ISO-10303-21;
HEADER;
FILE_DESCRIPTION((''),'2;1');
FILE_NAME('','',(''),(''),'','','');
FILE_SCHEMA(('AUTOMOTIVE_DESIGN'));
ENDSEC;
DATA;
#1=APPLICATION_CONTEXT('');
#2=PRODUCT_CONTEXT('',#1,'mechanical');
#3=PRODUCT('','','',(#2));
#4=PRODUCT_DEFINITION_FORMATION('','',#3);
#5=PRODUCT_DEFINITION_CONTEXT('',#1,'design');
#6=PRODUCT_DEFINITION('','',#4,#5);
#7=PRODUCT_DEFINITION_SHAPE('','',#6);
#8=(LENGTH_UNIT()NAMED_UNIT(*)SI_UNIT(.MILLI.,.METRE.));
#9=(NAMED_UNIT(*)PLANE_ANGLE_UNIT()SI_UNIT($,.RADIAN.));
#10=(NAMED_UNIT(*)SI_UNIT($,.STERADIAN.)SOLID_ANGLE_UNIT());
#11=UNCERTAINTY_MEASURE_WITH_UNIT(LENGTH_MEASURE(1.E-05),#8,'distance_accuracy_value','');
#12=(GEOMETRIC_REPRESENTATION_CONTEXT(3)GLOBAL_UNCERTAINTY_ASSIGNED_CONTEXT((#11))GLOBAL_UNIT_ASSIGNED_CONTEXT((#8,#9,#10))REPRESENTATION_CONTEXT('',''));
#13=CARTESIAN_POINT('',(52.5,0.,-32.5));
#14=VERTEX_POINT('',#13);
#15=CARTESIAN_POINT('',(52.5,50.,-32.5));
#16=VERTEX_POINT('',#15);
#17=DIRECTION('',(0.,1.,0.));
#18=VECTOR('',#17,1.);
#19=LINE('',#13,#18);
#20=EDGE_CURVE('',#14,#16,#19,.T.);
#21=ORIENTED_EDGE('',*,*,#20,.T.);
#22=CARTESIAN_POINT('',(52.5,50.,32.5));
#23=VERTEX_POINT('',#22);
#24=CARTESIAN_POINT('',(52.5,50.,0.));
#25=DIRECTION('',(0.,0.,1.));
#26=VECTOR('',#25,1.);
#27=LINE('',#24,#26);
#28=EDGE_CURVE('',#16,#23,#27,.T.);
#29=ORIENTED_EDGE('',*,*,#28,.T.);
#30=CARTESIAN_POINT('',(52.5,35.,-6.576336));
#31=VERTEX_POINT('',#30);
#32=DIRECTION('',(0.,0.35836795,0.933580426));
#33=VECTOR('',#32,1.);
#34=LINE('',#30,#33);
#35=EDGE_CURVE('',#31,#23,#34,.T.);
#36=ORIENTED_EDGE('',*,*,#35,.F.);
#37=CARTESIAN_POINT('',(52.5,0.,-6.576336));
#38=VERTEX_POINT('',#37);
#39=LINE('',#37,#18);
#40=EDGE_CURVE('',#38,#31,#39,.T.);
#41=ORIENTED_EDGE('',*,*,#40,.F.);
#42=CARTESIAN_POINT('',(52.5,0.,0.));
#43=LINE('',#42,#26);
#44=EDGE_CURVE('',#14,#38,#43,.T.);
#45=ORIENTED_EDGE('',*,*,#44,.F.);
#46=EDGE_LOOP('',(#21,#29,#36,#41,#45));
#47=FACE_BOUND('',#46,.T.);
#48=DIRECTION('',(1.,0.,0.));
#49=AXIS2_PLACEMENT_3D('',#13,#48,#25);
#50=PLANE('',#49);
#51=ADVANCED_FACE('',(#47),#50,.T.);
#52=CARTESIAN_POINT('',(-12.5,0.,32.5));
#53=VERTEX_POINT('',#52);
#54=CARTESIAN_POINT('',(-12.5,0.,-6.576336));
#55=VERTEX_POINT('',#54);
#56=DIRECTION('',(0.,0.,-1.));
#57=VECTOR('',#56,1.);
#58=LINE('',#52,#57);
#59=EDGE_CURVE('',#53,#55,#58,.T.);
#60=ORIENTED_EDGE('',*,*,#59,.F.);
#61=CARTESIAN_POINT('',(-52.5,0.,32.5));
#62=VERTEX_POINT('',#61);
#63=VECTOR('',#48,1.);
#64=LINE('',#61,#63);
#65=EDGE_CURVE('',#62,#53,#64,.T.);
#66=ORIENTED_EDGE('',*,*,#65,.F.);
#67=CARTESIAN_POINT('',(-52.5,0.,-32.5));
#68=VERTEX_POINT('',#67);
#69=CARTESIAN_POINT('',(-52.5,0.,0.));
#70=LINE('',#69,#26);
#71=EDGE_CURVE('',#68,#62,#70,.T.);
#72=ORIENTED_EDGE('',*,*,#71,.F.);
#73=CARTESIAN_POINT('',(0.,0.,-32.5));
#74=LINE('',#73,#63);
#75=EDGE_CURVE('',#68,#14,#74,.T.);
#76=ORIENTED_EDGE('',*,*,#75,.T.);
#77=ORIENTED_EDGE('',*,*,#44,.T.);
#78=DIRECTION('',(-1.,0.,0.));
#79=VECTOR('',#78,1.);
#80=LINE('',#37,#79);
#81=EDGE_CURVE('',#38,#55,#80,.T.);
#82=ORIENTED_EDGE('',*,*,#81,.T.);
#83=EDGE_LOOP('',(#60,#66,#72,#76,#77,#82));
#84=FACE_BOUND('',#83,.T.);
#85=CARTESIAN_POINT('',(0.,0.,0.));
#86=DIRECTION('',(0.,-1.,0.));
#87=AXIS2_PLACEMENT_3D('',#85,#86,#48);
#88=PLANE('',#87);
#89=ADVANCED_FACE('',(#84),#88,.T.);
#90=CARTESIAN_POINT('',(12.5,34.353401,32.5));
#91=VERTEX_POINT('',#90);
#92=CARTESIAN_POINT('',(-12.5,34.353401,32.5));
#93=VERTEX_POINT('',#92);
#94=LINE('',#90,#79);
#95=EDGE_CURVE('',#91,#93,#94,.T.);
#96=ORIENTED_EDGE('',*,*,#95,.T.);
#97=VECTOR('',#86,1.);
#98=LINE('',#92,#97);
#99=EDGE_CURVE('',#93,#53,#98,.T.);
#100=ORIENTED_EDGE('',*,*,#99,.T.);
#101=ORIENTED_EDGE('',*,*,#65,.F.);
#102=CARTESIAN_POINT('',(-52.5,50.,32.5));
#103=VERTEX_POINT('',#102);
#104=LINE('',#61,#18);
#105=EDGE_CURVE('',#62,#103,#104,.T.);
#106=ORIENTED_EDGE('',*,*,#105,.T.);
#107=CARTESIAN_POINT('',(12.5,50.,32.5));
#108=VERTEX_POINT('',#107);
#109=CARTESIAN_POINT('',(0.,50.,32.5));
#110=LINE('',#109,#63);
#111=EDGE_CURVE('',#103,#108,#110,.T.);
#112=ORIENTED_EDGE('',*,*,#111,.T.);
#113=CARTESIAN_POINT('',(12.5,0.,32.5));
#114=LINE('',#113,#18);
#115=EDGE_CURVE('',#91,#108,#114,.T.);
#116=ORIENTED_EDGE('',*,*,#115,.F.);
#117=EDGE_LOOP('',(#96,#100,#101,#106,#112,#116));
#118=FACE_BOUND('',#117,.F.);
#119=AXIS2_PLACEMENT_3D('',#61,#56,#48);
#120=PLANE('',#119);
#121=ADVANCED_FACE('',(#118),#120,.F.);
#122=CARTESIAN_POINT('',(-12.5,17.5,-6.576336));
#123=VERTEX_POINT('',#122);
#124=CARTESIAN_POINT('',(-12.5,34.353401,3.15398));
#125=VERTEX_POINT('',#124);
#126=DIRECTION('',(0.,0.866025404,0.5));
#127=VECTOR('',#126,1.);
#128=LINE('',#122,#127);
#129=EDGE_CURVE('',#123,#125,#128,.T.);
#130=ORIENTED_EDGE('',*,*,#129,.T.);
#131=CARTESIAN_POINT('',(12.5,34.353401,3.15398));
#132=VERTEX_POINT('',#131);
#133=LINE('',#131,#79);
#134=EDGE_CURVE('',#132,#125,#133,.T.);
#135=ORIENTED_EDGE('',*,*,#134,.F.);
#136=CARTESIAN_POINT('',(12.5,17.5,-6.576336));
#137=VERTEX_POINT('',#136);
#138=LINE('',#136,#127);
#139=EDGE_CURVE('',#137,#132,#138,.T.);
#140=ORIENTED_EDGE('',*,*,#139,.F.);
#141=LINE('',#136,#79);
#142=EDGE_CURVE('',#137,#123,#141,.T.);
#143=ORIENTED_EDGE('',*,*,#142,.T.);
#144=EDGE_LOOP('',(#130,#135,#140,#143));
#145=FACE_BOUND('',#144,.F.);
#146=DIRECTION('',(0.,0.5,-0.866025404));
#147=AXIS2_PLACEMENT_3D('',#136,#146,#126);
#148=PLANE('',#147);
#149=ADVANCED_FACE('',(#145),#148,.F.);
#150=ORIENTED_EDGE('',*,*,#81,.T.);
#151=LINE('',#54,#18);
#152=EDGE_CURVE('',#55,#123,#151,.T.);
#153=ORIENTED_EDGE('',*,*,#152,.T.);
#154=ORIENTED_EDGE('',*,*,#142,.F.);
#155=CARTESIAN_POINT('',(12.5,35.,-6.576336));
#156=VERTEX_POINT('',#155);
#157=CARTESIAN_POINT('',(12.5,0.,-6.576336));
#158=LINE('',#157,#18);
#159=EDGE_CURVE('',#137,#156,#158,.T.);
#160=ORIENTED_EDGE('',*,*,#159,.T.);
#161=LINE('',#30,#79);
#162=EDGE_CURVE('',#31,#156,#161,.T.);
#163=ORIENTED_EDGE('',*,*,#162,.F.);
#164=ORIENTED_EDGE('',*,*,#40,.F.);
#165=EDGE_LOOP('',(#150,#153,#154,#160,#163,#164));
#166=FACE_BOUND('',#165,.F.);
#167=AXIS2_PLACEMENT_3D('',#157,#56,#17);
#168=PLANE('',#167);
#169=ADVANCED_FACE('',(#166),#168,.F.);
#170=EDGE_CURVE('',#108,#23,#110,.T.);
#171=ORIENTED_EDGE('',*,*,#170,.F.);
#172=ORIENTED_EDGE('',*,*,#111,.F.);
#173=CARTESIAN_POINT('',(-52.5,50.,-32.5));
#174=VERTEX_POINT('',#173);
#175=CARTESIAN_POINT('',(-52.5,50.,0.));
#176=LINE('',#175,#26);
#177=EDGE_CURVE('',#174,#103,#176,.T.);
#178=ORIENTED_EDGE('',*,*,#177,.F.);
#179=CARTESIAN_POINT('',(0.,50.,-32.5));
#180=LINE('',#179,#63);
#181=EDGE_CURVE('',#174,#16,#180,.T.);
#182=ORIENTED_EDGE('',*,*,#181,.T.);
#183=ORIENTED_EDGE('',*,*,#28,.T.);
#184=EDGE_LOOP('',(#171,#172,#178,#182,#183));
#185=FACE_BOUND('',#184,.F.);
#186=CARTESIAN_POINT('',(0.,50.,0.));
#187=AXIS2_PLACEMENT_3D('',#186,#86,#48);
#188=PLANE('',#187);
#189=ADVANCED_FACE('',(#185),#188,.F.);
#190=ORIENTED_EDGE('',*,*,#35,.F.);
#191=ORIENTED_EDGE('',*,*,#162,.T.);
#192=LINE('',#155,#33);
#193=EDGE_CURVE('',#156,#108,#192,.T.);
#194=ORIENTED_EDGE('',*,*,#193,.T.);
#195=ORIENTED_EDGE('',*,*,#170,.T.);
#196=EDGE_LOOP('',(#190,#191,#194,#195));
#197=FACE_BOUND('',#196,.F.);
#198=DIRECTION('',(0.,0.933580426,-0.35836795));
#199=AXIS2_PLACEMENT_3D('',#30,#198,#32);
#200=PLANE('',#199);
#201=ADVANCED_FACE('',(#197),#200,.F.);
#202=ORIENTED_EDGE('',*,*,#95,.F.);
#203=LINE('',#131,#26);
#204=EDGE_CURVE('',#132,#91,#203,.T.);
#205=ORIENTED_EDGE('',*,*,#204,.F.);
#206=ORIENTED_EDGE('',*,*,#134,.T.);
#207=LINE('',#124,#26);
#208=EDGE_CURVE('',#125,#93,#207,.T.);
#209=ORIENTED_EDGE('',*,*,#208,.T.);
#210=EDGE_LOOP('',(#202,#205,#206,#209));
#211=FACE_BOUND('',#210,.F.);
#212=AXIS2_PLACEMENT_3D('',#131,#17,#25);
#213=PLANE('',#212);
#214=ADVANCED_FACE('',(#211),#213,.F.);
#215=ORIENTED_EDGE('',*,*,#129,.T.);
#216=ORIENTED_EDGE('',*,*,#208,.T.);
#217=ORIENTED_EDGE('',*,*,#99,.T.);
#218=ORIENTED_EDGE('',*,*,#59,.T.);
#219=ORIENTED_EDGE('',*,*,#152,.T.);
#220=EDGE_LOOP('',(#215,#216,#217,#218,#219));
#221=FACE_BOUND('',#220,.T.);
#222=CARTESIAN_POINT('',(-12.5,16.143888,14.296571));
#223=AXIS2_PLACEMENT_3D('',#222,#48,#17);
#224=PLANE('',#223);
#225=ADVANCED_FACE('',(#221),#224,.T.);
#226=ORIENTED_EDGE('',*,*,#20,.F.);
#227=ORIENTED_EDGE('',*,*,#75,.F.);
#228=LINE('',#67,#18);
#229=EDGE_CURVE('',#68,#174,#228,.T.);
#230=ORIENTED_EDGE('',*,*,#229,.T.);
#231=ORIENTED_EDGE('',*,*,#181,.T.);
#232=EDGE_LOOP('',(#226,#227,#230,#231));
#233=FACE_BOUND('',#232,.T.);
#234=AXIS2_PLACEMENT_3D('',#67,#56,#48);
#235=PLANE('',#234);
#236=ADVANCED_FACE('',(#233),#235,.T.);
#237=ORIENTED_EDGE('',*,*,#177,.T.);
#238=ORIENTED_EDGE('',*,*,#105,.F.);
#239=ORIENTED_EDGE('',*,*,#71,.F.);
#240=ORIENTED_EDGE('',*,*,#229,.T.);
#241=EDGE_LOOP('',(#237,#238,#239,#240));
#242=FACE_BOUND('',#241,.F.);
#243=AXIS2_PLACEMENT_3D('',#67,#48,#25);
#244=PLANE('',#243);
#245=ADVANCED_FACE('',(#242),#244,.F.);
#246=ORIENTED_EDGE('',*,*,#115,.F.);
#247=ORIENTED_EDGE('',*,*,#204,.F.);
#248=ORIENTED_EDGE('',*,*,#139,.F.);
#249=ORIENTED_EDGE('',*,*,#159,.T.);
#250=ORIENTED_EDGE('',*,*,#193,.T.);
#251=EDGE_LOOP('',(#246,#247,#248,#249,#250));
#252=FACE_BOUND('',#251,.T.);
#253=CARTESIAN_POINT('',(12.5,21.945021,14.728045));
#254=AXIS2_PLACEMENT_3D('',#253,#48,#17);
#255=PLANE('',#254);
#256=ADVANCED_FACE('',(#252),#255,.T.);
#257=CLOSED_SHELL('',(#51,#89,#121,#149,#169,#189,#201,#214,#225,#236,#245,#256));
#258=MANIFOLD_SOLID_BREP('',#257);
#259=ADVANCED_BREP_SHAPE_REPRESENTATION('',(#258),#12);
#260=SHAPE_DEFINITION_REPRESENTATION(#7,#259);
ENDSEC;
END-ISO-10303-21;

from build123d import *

# Parameters (mm, degrees)
F0_W     = 105
F0_H     = 65
F1_DEPTH = 50
F3_DEPTH = 40
F5_DEPTH = 25
F6_DEPTH = 25
F7_DEPTH = 25


# Not quite as in the source:
# - a feature names something its author has since deleted; it is built from what else it names


with BuildPart() as f1:
    # F0 (on Front) → F1 (new body)
    with BuildSketch(Plane.XZ):
        Rectangle(F0_W, F0_H)
    extrude(amount=-F1_DEPTH)

    # F2 (on face) → F3 (cut)
    with BuildSketch(Plane.YZ.offset(52.5)):
        Polygon((0, 32.5), (0, -6.5763359704), (35, -6.5763359704), (50, 32.5), align=None)
    extrude(amount=-F3_DEPTH, mode=Mode.SUBTRACT)

    # F4 (on face) → F5 (join)
    with BuildSketch(Plane.YZ.offset(12.5)):
        Polygon((34.35340128, 3.1539797953), (34.35340128, 32.5), (0, 32.5), (0, -6.5763359704), (17.5, -6.5763359704), align=None)
    extrude(amount=-F5_DEPTH)

    # F4 (on face) → F6 (join)
    with BuildSketch(Plane.YZ.offset(12.5)):
        Polygon((34.35340128, 3.1539797953), (34.35340128, 32.5), (0, 32.5), (0, -6.5763359704), (17.5, -6.5763359704), align=None)
    extrude(amount=-F6_DEPTH)

    # F4 (on face) → F7 (cut)
    with BuildSketch(Plane.YZ.offset(12.5)):
        Polygon((34.35340128, 3.1539797953), (34.35340128, 32.5), (0, 32.5), (0, -6.5763359704), (17.5, -6.5763359704), align=None)
    extrude(amount=-F7_DEPTH, mode=Mode.SUBTRACT)


solid = f1.part
